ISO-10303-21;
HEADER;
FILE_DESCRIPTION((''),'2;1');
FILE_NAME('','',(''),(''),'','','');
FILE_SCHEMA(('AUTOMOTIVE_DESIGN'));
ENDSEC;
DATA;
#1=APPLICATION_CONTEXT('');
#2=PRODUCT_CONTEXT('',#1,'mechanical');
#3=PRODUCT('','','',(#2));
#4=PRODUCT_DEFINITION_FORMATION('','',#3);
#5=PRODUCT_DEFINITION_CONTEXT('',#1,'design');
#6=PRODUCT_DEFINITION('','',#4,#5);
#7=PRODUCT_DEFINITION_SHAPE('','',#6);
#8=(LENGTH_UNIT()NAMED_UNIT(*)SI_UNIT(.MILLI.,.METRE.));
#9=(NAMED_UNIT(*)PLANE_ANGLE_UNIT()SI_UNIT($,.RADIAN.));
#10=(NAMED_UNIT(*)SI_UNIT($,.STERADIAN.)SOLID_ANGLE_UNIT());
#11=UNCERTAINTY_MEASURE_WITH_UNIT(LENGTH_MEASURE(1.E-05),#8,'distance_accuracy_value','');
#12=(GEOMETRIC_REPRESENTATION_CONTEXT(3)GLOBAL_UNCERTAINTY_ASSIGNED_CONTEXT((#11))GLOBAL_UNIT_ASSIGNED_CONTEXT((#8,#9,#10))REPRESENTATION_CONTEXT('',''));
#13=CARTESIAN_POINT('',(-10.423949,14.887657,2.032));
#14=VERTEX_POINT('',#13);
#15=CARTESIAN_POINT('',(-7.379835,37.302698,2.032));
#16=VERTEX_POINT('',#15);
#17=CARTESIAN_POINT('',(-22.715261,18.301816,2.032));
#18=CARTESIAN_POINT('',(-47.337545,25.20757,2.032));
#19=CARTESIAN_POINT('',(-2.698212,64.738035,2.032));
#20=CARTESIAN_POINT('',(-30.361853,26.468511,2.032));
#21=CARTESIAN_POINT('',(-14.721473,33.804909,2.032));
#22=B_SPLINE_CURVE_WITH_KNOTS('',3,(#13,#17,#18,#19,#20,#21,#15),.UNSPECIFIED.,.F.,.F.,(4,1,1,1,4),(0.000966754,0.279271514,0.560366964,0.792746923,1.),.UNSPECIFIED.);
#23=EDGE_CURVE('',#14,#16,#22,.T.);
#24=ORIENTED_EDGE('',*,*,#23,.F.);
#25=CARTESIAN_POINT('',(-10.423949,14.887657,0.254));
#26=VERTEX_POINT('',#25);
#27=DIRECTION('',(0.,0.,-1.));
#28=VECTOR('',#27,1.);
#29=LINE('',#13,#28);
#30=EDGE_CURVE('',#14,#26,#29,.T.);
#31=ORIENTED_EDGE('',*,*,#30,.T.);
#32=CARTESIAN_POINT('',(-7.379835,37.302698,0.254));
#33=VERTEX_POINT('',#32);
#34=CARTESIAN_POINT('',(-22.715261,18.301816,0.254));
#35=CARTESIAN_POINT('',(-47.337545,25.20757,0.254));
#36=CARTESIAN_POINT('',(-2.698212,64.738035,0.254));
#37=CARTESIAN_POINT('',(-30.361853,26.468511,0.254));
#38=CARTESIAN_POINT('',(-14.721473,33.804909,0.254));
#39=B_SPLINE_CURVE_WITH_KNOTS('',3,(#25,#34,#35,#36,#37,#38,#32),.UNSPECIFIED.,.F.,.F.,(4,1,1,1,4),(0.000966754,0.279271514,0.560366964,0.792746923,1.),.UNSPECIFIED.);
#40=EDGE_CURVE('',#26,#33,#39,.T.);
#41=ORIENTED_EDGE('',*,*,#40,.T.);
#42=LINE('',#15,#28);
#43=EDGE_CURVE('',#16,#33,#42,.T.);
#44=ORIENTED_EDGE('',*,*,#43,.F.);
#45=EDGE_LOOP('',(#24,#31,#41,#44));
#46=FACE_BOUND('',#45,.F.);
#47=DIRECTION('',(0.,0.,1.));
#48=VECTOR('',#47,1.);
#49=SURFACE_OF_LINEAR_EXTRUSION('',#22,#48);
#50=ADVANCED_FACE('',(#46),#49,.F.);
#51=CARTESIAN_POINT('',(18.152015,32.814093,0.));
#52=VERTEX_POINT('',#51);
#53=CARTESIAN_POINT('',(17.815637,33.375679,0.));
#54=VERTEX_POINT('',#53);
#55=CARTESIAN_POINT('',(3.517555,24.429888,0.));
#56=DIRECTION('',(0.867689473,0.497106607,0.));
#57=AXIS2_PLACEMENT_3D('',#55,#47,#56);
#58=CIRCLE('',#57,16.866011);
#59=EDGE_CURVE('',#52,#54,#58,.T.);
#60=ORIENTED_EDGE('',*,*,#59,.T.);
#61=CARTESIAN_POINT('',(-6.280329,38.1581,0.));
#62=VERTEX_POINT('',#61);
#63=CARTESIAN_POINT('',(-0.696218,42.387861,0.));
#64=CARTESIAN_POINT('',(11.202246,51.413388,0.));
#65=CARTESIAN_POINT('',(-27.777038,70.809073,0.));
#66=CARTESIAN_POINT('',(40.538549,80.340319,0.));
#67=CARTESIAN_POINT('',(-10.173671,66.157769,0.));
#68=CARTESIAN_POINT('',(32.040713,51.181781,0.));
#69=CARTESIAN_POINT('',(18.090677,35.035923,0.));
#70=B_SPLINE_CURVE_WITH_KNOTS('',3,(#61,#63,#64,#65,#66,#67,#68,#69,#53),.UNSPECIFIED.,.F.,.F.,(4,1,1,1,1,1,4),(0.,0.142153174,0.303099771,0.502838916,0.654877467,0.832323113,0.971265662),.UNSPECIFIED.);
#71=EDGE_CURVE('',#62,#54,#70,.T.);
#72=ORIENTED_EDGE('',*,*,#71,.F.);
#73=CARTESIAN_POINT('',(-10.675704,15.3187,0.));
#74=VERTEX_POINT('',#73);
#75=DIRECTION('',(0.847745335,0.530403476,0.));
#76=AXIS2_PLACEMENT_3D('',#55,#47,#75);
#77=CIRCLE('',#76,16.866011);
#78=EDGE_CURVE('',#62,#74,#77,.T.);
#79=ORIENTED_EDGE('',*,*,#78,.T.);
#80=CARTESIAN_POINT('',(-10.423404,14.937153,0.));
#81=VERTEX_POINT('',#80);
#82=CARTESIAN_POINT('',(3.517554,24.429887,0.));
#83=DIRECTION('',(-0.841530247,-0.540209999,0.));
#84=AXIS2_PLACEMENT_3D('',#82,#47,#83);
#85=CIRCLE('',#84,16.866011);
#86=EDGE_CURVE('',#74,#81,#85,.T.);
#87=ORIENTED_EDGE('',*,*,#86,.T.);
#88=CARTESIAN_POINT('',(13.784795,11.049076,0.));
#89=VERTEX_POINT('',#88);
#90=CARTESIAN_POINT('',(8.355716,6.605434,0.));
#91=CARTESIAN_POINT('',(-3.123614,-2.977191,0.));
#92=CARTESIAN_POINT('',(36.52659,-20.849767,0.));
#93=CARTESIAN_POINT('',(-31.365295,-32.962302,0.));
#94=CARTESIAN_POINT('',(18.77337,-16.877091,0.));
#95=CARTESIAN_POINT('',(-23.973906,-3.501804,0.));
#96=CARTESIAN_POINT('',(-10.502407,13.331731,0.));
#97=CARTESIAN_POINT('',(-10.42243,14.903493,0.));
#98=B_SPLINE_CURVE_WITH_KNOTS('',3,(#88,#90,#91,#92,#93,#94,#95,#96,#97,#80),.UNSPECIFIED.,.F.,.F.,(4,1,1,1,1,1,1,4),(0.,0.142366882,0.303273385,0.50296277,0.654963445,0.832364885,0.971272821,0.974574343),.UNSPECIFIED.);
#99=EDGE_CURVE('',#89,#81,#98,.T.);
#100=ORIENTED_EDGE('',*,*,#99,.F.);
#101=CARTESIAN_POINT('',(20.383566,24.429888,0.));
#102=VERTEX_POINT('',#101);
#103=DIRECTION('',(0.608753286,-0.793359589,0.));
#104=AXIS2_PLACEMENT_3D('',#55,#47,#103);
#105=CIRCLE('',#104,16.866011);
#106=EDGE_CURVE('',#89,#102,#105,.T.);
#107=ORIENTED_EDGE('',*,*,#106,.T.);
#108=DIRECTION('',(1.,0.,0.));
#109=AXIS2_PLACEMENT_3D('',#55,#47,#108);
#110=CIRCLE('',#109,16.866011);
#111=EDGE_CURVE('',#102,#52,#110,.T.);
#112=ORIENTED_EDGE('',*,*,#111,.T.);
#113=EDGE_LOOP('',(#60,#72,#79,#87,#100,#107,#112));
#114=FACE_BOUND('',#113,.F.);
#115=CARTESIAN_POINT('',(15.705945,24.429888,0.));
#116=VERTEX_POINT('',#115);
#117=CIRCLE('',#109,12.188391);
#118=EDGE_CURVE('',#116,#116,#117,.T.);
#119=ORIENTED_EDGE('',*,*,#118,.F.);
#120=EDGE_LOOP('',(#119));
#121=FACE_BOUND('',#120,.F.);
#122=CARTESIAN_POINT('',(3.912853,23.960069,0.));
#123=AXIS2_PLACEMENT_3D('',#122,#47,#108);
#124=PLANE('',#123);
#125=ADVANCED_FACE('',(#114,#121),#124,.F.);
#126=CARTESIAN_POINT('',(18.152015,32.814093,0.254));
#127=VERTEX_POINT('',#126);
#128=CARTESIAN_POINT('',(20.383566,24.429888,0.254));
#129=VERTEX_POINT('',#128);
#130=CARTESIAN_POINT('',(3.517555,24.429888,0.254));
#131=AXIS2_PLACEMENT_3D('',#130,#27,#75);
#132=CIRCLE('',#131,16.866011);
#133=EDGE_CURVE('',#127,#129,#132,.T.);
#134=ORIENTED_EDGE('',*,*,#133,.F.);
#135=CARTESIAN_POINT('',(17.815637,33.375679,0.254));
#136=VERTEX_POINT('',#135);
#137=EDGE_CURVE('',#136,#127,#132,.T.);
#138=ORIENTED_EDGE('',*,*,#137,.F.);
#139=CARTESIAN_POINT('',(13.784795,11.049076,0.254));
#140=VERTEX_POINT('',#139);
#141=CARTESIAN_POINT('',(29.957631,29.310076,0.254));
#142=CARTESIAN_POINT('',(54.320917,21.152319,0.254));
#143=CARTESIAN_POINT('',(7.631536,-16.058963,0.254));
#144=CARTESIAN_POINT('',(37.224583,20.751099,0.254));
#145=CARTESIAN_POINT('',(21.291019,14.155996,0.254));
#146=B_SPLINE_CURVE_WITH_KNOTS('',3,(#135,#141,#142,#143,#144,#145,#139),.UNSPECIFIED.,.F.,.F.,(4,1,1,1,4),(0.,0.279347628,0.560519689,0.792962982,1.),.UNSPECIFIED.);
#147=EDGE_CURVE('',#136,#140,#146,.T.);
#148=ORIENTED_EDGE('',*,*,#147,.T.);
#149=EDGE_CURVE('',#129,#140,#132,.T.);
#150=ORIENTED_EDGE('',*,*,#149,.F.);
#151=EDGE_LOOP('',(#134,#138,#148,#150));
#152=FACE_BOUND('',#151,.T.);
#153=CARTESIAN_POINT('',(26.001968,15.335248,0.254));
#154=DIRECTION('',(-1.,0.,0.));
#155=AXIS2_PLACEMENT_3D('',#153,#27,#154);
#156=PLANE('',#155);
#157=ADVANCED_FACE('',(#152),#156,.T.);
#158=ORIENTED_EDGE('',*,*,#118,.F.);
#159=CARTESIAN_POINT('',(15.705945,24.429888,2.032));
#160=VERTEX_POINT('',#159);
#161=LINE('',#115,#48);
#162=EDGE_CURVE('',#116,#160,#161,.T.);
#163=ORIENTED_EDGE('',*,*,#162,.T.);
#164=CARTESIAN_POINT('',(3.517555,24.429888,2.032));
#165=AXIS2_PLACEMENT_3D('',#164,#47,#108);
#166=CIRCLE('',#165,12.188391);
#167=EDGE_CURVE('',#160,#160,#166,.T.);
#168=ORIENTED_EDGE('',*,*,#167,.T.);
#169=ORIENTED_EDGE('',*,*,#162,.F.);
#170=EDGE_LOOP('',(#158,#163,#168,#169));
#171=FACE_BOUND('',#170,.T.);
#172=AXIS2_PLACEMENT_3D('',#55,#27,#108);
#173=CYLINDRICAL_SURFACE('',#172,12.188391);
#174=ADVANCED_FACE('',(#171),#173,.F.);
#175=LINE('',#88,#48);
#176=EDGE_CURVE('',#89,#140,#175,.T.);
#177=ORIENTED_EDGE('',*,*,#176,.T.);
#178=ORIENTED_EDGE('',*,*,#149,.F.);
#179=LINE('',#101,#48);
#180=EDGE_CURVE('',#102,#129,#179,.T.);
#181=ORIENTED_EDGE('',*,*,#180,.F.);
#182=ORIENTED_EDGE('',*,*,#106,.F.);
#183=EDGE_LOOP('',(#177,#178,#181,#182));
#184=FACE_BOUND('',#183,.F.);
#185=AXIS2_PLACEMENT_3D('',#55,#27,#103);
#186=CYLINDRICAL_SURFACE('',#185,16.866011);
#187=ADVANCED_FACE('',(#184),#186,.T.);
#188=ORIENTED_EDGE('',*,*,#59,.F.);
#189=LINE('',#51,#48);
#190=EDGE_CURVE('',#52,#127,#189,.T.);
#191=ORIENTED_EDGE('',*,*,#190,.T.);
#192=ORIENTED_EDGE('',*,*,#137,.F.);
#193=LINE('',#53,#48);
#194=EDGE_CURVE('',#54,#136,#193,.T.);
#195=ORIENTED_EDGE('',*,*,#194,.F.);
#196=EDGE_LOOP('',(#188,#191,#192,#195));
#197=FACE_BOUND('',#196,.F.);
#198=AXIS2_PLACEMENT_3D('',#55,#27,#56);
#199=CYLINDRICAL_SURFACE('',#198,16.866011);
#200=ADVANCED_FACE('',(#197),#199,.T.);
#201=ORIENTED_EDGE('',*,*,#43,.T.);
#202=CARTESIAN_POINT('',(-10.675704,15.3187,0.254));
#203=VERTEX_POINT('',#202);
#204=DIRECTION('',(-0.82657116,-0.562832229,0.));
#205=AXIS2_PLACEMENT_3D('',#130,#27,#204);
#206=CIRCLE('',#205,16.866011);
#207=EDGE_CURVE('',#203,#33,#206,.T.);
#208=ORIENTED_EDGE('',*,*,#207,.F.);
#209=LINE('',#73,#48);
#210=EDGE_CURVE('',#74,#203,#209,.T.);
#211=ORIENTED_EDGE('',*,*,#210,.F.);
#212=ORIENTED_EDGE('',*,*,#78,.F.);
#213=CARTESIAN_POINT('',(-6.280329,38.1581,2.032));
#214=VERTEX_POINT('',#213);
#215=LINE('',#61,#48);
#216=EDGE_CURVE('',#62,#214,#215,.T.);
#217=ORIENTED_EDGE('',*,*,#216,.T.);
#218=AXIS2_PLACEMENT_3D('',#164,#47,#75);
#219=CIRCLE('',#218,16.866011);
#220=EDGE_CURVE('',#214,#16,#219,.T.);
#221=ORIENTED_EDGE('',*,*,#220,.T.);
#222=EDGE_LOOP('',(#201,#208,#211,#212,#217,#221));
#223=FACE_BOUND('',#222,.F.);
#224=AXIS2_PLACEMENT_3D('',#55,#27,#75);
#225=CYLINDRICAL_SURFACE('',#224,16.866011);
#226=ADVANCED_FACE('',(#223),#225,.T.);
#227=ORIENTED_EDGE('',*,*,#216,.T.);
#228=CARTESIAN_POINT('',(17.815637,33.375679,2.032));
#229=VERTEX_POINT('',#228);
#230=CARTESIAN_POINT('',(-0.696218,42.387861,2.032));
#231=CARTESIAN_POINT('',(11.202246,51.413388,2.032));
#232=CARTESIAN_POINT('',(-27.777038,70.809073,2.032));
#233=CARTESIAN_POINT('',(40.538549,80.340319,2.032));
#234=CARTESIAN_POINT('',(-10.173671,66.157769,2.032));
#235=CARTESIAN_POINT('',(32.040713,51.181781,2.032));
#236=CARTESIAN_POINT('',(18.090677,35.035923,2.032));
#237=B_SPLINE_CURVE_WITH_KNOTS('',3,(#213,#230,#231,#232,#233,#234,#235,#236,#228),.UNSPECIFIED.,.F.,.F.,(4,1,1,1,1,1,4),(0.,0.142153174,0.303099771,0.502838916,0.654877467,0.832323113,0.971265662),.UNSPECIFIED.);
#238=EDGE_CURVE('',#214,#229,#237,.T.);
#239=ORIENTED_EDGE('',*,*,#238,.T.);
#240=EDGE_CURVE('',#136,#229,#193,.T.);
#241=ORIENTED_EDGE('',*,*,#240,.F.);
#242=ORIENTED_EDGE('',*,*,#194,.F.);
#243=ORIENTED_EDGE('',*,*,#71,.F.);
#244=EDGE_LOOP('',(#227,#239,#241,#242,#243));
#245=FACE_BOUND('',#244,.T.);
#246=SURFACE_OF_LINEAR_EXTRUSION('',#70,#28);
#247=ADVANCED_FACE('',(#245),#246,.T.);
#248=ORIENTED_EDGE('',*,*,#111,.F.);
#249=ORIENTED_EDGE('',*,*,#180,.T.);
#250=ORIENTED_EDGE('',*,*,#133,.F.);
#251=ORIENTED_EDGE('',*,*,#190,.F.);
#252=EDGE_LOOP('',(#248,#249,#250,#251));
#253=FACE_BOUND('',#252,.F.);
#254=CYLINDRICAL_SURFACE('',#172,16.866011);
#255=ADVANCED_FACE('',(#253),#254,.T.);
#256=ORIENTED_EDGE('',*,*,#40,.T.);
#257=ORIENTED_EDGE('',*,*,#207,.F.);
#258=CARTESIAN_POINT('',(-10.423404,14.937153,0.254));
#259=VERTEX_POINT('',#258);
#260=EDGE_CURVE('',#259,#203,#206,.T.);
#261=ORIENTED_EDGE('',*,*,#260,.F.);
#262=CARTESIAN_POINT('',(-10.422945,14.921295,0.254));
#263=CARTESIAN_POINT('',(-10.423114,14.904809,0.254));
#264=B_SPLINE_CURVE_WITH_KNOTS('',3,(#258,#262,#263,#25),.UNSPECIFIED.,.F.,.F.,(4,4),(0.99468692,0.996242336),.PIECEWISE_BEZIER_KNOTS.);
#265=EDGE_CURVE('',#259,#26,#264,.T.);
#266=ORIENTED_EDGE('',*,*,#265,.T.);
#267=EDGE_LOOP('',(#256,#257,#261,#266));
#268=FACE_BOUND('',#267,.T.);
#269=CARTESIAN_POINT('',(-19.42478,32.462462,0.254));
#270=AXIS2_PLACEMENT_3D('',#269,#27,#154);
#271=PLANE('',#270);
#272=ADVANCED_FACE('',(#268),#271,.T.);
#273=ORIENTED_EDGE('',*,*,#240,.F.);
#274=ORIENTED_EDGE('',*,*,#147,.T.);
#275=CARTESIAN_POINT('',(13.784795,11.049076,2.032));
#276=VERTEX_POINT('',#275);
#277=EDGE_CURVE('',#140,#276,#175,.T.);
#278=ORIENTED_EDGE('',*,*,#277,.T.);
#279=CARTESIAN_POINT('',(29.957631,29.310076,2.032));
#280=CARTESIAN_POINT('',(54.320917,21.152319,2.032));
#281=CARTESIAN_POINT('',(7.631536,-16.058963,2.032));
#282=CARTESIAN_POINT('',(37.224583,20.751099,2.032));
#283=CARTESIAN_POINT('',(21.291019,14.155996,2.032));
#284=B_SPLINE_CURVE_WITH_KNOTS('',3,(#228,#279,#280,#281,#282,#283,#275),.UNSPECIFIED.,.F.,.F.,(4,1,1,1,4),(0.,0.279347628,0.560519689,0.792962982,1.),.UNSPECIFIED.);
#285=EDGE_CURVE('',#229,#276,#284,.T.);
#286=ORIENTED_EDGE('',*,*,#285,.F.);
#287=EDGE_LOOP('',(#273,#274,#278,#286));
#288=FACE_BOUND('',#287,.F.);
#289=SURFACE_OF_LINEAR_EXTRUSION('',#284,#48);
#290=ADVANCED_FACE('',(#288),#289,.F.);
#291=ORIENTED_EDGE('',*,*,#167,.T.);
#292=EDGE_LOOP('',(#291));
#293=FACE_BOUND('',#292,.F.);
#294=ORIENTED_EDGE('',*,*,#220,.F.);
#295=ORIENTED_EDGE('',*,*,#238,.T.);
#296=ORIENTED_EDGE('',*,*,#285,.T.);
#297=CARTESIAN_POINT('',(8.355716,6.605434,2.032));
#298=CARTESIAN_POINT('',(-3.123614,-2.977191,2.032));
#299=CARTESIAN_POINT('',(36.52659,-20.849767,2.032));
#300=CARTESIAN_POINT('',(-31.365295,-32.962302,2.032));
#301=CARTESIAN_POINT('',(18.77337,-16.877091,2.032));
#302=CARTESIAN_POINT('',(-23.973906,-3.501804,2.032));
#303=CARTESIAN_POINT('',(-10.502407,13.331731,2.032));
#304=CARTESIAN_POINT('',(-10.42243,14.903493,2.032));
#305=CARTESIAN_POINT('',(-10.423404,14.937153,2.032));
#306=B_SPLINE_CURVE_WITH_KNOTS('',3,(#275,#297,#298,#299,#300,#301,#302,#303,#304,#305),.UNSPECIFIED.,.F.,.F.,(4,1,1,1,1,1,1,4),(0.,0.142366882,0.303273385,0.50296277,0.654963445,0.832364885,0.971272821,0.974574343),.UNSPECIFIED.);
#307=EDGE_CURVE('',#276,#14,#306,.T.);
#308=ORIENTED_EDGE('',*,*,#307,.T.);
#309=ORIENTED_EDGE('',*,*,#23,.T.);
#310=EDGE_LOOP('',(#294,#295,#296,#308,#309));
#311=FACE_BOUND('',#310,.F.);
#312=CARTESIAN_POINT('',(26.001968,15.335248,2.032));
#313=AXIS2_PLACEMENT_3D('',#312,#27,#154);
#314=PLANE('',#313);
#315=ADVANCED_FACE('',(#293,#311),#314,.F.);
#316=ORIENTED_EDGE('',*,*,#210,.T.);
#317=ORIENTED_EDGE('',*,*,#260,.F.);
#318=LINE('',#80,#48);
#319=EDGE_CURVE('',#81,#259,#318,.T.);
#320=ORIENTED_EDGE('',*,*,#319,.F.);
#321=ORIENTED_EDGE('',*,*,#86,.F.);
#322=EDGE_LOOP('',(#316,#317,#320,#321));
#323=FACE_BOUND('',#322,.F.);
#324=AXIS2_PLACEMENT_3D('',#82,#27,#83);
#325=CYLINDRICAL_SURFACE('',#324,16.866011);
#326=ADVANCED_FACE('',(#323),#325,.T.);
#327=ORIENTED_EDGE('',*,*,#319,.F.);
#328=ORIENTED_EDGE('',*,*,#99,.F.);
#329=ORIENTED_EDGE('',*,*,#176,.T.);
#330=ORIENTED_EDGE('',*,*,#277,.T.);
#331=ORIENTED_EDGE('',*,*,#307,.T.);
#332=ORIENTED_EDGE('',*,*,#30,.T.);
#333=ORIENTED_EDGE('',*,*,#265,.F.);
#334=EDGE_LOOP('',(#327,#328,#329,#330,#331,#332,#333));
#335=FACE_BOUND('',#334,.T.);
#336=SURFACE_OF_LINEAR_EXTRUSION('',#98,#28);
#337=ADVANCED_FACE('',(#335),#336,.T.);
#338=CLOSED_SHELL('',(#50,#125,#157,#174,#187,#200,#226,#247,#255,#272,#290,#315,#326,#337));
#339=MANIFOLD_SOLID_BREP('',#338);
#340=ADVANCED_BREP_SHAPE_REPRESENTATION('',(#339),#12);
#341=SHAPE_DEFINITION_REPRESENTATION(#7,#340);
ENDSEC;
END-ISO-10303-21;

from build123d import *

# Parameters (mm, degrees)
F0_R     = 12.1883906552
F1_DEPTH = 2.032
F3_DEPTH = 1.778
F4_DEPTH = 1.778


with BuildPart() as f1:
    # F0 (on Top) → F1 (new body)
    with BuildSketch(Plane.XY):
        with BuildLine():
            ThreePointArc((13.784794663, 11.0490757015), (18.6441823929, 16.9701638295), (20.38356619, 24.4298875332))
            ThreePointArc((20.38356619, 24.4298875332), (19.8161332392, 28.7679379047), (18.1520153348, 32.8140932132))
            add(Edge.make_bspline(
                [(17.8156372773, 33.3756785813), (17.7587571399, 33.0323279211), (17.952126379, 32.9212248426), (18.1520153348, 32.8140932132)],
                knots=[0.9712656622, 0.9712656622, 0.9712656622, 0.9712656622, 1, 1, 1, 1], degree=3))
            ThreePointArc((17.8156372773, 33.3756785813), (6.8009728243, 40.9732096058), (-6.2803293264, 38.1580995332))
            ThreePointArc((-6.2803293264, 38.1580995332), (-13.0445489471, 27.6172150971), (-10.6757038543, 15.3186995486))
            add(Edge.make_bspline(
                [(-10.4234037199, 14.9371527699), (-10.4293374494, 15.1422077576), (-10.5403253974, 15.2422499293), (-10.6757038543, 15.3186995486)],
                knots=[0.974574343, 0.974574343, 0.974574343, 0.974574343, 0.9946869202, 0.9946869202, 0.9946869202, 0.9946869202], degree=3))
            ThreePointArc((-10.4234037199, 14.9371527699), (0.8429823205, 7.7772901173), (13.784794663, 11.0490757015))
        make_face()
        with Locations((3.5175548401, 24.4298875332)):
            Circle(F0_R, mode=Mode.SUBTRACT)
        with BuildLine():
            add(Edge.make_bspline(
                [(17.8156372773, 33.3756785813), (17.7587571399, 33.0323279211), (17.952126379, 32.9212248426), (18.1520153348, 32.8140932132)],
                knots=[0.9712656622, 0.9712656622, 0.9712656622, 0.9712656622, 1, 1, 1, 1], degree=3))
            ThreePointArc((18.1520153348, 32.8140932132), (17.9865511653, 33.0965180317), (17.8156372773, 33.3756785813))
        make_face()
        with BuildLine():
            add(Edge.make_bspline(
                [(13.784794663, 11.0490757015), (8.3557158887, 6.6054344485), (-3.123614094, -2.9771913197), (36.5265902894, -20.8497673339), (-31.3652954139, -32.9623022839), (18.773370022, -16.8770910693), (-23.9739059772, -3.5018039537), (-10.5024070902, 13.331730969), (-10.4224296856, 14.9034925565), (-10.4234037199, 14.9371527699)],
                knots=[0, 0, 0, 0, 0.1423668823, 0.3032733845, 0.5029627697, 0.6549634449, 0.8323648853, 0.9712728206, 0.974574343, 0.974574343, 0.974574343, 0.974574343], degree=3))
            ThreePointArc((13.784794663, 11.0490757015), (0.8429823205, 7.7772901173), (-10.4234037199, 14.9371527699))
        make_face()
        with BuildLine():
            ThreePointArc((-6.2803293264, 38.1580995332), (6.8009728243, 40.9732096058), (17.8156372773, 33.3756785813))
            add(Edge.make_bspline(
                [(-6.2803293264, 38.1580995332), (-0.6962177807, 42.3878608858), (11.2022462073, 51.4133875551), (-27.7770382027, 70.8090727538), (40.5385488074, 80.3403187132), (-10.1736711582, 66.1577693895), (32.0407127539, 51.1817811584), (18.0906765472, 35.0359227231), (17.8156372773, 33.3756785813)],
                knots=[0, 0, 0, 0, 0.1421531737, 0.3030997713, 0.5028389159, 0.6548774673, 0.8323231132, 0.9712656622, 0.9712656622, 0.9712656622, 0.9712656622], degree=3))
        make_face()
        with BuildLine():
            ThreePointArc((-10.6757038543, 15.3186995486), (-10.5508473299, 15.1270707962), (-10.4234037199, 14.9371527699))
            add(Edge.make_bspline(
                [(-10.4234037199, 14.9371527699), (-10.4293374494, 15.1422077576), (-10.5403253974, 15.2422499293), (-10.6757038543, 15.3186995486)],
                knots=[0.974574343, 0.974574343, 0.974574343, 0.974574343, 0.9946869202, 0.9946869202, 0.9946869202, 0.9946869202], degree=3))
        make_face()
    extrude(amount=F1_DEPTH)

    # F2 (on face) → F3 (join)
    with BuildSketch(Plane.XY.offset(2.032)):
        with BuildLine():
            add(Edge.make_bspline(
                [(-10.4239492892, 14.8876568601), (-22.7152611751, 18.3018164314), (-47.3375447394, 25.2075702094), (-2.6982117701, 64.7380350008), (-30.3618527682, 26.4685111846), (-14.7214727439, 33.8049091648), (-7.3798347824, 37.3026975711)],
                knots=[0.0009667541, 0.0009667541, 0.0009667541, 0.0009667541, 0.2792715137, 0.5603669642, 0.7927469234, 1, 1, 1, 1], degree=3))
            add(Edge.make_bspline(
                [(-10.4234037199, 14.9371527699), (-10.4229448321, 14.9212947447), (-10.4231142501, 14.9048086615), (-10.4239492828, 14.8876568611)],
                knots=[0.9946869202, 0.9946869202, 0.9946869202, 0.9946869202, 0.996242336, 0.996242336, 0.996242336, 0.996242336], degree=3))
            ThreePointArc((-10.4234037199, 14.9371527699), (-13.1944254038, 26.7041028231), (-7.3798347824, 37.3026975711))
        make_face()
    extrude(amount=-F3_DEPTH)

    # F2 (on face) → F4 (join)
    with BuildSketch(Plane.XY.offset(2.032)):
        with BuildLine():
            add(Edge.make_bspline(
                [(17.8156372773, 33.3756785813), (29.9576306347, 29.3100761848), (54.3209173377, 21.1523187318), (7.6315357023, -16.0589632681), (37.2245832749, 20.7510992169), (21.2910187293, 14.1559963145), (13.784794663, 11.0490757015)],
                knots=[0, 0, 0, 0, 0.2793476276, 0.5605196891, 0.7929629822, 1, 1, 1, 1], degree=3))
            ThreePointArc((17.8156372773, 33.3756785813), (20.1152373131, 21.4333436268), (13.784794663, 11.0490757015))
        make_face()
    extrude(amount=-F4_DEPTH)


solid = f1.part
